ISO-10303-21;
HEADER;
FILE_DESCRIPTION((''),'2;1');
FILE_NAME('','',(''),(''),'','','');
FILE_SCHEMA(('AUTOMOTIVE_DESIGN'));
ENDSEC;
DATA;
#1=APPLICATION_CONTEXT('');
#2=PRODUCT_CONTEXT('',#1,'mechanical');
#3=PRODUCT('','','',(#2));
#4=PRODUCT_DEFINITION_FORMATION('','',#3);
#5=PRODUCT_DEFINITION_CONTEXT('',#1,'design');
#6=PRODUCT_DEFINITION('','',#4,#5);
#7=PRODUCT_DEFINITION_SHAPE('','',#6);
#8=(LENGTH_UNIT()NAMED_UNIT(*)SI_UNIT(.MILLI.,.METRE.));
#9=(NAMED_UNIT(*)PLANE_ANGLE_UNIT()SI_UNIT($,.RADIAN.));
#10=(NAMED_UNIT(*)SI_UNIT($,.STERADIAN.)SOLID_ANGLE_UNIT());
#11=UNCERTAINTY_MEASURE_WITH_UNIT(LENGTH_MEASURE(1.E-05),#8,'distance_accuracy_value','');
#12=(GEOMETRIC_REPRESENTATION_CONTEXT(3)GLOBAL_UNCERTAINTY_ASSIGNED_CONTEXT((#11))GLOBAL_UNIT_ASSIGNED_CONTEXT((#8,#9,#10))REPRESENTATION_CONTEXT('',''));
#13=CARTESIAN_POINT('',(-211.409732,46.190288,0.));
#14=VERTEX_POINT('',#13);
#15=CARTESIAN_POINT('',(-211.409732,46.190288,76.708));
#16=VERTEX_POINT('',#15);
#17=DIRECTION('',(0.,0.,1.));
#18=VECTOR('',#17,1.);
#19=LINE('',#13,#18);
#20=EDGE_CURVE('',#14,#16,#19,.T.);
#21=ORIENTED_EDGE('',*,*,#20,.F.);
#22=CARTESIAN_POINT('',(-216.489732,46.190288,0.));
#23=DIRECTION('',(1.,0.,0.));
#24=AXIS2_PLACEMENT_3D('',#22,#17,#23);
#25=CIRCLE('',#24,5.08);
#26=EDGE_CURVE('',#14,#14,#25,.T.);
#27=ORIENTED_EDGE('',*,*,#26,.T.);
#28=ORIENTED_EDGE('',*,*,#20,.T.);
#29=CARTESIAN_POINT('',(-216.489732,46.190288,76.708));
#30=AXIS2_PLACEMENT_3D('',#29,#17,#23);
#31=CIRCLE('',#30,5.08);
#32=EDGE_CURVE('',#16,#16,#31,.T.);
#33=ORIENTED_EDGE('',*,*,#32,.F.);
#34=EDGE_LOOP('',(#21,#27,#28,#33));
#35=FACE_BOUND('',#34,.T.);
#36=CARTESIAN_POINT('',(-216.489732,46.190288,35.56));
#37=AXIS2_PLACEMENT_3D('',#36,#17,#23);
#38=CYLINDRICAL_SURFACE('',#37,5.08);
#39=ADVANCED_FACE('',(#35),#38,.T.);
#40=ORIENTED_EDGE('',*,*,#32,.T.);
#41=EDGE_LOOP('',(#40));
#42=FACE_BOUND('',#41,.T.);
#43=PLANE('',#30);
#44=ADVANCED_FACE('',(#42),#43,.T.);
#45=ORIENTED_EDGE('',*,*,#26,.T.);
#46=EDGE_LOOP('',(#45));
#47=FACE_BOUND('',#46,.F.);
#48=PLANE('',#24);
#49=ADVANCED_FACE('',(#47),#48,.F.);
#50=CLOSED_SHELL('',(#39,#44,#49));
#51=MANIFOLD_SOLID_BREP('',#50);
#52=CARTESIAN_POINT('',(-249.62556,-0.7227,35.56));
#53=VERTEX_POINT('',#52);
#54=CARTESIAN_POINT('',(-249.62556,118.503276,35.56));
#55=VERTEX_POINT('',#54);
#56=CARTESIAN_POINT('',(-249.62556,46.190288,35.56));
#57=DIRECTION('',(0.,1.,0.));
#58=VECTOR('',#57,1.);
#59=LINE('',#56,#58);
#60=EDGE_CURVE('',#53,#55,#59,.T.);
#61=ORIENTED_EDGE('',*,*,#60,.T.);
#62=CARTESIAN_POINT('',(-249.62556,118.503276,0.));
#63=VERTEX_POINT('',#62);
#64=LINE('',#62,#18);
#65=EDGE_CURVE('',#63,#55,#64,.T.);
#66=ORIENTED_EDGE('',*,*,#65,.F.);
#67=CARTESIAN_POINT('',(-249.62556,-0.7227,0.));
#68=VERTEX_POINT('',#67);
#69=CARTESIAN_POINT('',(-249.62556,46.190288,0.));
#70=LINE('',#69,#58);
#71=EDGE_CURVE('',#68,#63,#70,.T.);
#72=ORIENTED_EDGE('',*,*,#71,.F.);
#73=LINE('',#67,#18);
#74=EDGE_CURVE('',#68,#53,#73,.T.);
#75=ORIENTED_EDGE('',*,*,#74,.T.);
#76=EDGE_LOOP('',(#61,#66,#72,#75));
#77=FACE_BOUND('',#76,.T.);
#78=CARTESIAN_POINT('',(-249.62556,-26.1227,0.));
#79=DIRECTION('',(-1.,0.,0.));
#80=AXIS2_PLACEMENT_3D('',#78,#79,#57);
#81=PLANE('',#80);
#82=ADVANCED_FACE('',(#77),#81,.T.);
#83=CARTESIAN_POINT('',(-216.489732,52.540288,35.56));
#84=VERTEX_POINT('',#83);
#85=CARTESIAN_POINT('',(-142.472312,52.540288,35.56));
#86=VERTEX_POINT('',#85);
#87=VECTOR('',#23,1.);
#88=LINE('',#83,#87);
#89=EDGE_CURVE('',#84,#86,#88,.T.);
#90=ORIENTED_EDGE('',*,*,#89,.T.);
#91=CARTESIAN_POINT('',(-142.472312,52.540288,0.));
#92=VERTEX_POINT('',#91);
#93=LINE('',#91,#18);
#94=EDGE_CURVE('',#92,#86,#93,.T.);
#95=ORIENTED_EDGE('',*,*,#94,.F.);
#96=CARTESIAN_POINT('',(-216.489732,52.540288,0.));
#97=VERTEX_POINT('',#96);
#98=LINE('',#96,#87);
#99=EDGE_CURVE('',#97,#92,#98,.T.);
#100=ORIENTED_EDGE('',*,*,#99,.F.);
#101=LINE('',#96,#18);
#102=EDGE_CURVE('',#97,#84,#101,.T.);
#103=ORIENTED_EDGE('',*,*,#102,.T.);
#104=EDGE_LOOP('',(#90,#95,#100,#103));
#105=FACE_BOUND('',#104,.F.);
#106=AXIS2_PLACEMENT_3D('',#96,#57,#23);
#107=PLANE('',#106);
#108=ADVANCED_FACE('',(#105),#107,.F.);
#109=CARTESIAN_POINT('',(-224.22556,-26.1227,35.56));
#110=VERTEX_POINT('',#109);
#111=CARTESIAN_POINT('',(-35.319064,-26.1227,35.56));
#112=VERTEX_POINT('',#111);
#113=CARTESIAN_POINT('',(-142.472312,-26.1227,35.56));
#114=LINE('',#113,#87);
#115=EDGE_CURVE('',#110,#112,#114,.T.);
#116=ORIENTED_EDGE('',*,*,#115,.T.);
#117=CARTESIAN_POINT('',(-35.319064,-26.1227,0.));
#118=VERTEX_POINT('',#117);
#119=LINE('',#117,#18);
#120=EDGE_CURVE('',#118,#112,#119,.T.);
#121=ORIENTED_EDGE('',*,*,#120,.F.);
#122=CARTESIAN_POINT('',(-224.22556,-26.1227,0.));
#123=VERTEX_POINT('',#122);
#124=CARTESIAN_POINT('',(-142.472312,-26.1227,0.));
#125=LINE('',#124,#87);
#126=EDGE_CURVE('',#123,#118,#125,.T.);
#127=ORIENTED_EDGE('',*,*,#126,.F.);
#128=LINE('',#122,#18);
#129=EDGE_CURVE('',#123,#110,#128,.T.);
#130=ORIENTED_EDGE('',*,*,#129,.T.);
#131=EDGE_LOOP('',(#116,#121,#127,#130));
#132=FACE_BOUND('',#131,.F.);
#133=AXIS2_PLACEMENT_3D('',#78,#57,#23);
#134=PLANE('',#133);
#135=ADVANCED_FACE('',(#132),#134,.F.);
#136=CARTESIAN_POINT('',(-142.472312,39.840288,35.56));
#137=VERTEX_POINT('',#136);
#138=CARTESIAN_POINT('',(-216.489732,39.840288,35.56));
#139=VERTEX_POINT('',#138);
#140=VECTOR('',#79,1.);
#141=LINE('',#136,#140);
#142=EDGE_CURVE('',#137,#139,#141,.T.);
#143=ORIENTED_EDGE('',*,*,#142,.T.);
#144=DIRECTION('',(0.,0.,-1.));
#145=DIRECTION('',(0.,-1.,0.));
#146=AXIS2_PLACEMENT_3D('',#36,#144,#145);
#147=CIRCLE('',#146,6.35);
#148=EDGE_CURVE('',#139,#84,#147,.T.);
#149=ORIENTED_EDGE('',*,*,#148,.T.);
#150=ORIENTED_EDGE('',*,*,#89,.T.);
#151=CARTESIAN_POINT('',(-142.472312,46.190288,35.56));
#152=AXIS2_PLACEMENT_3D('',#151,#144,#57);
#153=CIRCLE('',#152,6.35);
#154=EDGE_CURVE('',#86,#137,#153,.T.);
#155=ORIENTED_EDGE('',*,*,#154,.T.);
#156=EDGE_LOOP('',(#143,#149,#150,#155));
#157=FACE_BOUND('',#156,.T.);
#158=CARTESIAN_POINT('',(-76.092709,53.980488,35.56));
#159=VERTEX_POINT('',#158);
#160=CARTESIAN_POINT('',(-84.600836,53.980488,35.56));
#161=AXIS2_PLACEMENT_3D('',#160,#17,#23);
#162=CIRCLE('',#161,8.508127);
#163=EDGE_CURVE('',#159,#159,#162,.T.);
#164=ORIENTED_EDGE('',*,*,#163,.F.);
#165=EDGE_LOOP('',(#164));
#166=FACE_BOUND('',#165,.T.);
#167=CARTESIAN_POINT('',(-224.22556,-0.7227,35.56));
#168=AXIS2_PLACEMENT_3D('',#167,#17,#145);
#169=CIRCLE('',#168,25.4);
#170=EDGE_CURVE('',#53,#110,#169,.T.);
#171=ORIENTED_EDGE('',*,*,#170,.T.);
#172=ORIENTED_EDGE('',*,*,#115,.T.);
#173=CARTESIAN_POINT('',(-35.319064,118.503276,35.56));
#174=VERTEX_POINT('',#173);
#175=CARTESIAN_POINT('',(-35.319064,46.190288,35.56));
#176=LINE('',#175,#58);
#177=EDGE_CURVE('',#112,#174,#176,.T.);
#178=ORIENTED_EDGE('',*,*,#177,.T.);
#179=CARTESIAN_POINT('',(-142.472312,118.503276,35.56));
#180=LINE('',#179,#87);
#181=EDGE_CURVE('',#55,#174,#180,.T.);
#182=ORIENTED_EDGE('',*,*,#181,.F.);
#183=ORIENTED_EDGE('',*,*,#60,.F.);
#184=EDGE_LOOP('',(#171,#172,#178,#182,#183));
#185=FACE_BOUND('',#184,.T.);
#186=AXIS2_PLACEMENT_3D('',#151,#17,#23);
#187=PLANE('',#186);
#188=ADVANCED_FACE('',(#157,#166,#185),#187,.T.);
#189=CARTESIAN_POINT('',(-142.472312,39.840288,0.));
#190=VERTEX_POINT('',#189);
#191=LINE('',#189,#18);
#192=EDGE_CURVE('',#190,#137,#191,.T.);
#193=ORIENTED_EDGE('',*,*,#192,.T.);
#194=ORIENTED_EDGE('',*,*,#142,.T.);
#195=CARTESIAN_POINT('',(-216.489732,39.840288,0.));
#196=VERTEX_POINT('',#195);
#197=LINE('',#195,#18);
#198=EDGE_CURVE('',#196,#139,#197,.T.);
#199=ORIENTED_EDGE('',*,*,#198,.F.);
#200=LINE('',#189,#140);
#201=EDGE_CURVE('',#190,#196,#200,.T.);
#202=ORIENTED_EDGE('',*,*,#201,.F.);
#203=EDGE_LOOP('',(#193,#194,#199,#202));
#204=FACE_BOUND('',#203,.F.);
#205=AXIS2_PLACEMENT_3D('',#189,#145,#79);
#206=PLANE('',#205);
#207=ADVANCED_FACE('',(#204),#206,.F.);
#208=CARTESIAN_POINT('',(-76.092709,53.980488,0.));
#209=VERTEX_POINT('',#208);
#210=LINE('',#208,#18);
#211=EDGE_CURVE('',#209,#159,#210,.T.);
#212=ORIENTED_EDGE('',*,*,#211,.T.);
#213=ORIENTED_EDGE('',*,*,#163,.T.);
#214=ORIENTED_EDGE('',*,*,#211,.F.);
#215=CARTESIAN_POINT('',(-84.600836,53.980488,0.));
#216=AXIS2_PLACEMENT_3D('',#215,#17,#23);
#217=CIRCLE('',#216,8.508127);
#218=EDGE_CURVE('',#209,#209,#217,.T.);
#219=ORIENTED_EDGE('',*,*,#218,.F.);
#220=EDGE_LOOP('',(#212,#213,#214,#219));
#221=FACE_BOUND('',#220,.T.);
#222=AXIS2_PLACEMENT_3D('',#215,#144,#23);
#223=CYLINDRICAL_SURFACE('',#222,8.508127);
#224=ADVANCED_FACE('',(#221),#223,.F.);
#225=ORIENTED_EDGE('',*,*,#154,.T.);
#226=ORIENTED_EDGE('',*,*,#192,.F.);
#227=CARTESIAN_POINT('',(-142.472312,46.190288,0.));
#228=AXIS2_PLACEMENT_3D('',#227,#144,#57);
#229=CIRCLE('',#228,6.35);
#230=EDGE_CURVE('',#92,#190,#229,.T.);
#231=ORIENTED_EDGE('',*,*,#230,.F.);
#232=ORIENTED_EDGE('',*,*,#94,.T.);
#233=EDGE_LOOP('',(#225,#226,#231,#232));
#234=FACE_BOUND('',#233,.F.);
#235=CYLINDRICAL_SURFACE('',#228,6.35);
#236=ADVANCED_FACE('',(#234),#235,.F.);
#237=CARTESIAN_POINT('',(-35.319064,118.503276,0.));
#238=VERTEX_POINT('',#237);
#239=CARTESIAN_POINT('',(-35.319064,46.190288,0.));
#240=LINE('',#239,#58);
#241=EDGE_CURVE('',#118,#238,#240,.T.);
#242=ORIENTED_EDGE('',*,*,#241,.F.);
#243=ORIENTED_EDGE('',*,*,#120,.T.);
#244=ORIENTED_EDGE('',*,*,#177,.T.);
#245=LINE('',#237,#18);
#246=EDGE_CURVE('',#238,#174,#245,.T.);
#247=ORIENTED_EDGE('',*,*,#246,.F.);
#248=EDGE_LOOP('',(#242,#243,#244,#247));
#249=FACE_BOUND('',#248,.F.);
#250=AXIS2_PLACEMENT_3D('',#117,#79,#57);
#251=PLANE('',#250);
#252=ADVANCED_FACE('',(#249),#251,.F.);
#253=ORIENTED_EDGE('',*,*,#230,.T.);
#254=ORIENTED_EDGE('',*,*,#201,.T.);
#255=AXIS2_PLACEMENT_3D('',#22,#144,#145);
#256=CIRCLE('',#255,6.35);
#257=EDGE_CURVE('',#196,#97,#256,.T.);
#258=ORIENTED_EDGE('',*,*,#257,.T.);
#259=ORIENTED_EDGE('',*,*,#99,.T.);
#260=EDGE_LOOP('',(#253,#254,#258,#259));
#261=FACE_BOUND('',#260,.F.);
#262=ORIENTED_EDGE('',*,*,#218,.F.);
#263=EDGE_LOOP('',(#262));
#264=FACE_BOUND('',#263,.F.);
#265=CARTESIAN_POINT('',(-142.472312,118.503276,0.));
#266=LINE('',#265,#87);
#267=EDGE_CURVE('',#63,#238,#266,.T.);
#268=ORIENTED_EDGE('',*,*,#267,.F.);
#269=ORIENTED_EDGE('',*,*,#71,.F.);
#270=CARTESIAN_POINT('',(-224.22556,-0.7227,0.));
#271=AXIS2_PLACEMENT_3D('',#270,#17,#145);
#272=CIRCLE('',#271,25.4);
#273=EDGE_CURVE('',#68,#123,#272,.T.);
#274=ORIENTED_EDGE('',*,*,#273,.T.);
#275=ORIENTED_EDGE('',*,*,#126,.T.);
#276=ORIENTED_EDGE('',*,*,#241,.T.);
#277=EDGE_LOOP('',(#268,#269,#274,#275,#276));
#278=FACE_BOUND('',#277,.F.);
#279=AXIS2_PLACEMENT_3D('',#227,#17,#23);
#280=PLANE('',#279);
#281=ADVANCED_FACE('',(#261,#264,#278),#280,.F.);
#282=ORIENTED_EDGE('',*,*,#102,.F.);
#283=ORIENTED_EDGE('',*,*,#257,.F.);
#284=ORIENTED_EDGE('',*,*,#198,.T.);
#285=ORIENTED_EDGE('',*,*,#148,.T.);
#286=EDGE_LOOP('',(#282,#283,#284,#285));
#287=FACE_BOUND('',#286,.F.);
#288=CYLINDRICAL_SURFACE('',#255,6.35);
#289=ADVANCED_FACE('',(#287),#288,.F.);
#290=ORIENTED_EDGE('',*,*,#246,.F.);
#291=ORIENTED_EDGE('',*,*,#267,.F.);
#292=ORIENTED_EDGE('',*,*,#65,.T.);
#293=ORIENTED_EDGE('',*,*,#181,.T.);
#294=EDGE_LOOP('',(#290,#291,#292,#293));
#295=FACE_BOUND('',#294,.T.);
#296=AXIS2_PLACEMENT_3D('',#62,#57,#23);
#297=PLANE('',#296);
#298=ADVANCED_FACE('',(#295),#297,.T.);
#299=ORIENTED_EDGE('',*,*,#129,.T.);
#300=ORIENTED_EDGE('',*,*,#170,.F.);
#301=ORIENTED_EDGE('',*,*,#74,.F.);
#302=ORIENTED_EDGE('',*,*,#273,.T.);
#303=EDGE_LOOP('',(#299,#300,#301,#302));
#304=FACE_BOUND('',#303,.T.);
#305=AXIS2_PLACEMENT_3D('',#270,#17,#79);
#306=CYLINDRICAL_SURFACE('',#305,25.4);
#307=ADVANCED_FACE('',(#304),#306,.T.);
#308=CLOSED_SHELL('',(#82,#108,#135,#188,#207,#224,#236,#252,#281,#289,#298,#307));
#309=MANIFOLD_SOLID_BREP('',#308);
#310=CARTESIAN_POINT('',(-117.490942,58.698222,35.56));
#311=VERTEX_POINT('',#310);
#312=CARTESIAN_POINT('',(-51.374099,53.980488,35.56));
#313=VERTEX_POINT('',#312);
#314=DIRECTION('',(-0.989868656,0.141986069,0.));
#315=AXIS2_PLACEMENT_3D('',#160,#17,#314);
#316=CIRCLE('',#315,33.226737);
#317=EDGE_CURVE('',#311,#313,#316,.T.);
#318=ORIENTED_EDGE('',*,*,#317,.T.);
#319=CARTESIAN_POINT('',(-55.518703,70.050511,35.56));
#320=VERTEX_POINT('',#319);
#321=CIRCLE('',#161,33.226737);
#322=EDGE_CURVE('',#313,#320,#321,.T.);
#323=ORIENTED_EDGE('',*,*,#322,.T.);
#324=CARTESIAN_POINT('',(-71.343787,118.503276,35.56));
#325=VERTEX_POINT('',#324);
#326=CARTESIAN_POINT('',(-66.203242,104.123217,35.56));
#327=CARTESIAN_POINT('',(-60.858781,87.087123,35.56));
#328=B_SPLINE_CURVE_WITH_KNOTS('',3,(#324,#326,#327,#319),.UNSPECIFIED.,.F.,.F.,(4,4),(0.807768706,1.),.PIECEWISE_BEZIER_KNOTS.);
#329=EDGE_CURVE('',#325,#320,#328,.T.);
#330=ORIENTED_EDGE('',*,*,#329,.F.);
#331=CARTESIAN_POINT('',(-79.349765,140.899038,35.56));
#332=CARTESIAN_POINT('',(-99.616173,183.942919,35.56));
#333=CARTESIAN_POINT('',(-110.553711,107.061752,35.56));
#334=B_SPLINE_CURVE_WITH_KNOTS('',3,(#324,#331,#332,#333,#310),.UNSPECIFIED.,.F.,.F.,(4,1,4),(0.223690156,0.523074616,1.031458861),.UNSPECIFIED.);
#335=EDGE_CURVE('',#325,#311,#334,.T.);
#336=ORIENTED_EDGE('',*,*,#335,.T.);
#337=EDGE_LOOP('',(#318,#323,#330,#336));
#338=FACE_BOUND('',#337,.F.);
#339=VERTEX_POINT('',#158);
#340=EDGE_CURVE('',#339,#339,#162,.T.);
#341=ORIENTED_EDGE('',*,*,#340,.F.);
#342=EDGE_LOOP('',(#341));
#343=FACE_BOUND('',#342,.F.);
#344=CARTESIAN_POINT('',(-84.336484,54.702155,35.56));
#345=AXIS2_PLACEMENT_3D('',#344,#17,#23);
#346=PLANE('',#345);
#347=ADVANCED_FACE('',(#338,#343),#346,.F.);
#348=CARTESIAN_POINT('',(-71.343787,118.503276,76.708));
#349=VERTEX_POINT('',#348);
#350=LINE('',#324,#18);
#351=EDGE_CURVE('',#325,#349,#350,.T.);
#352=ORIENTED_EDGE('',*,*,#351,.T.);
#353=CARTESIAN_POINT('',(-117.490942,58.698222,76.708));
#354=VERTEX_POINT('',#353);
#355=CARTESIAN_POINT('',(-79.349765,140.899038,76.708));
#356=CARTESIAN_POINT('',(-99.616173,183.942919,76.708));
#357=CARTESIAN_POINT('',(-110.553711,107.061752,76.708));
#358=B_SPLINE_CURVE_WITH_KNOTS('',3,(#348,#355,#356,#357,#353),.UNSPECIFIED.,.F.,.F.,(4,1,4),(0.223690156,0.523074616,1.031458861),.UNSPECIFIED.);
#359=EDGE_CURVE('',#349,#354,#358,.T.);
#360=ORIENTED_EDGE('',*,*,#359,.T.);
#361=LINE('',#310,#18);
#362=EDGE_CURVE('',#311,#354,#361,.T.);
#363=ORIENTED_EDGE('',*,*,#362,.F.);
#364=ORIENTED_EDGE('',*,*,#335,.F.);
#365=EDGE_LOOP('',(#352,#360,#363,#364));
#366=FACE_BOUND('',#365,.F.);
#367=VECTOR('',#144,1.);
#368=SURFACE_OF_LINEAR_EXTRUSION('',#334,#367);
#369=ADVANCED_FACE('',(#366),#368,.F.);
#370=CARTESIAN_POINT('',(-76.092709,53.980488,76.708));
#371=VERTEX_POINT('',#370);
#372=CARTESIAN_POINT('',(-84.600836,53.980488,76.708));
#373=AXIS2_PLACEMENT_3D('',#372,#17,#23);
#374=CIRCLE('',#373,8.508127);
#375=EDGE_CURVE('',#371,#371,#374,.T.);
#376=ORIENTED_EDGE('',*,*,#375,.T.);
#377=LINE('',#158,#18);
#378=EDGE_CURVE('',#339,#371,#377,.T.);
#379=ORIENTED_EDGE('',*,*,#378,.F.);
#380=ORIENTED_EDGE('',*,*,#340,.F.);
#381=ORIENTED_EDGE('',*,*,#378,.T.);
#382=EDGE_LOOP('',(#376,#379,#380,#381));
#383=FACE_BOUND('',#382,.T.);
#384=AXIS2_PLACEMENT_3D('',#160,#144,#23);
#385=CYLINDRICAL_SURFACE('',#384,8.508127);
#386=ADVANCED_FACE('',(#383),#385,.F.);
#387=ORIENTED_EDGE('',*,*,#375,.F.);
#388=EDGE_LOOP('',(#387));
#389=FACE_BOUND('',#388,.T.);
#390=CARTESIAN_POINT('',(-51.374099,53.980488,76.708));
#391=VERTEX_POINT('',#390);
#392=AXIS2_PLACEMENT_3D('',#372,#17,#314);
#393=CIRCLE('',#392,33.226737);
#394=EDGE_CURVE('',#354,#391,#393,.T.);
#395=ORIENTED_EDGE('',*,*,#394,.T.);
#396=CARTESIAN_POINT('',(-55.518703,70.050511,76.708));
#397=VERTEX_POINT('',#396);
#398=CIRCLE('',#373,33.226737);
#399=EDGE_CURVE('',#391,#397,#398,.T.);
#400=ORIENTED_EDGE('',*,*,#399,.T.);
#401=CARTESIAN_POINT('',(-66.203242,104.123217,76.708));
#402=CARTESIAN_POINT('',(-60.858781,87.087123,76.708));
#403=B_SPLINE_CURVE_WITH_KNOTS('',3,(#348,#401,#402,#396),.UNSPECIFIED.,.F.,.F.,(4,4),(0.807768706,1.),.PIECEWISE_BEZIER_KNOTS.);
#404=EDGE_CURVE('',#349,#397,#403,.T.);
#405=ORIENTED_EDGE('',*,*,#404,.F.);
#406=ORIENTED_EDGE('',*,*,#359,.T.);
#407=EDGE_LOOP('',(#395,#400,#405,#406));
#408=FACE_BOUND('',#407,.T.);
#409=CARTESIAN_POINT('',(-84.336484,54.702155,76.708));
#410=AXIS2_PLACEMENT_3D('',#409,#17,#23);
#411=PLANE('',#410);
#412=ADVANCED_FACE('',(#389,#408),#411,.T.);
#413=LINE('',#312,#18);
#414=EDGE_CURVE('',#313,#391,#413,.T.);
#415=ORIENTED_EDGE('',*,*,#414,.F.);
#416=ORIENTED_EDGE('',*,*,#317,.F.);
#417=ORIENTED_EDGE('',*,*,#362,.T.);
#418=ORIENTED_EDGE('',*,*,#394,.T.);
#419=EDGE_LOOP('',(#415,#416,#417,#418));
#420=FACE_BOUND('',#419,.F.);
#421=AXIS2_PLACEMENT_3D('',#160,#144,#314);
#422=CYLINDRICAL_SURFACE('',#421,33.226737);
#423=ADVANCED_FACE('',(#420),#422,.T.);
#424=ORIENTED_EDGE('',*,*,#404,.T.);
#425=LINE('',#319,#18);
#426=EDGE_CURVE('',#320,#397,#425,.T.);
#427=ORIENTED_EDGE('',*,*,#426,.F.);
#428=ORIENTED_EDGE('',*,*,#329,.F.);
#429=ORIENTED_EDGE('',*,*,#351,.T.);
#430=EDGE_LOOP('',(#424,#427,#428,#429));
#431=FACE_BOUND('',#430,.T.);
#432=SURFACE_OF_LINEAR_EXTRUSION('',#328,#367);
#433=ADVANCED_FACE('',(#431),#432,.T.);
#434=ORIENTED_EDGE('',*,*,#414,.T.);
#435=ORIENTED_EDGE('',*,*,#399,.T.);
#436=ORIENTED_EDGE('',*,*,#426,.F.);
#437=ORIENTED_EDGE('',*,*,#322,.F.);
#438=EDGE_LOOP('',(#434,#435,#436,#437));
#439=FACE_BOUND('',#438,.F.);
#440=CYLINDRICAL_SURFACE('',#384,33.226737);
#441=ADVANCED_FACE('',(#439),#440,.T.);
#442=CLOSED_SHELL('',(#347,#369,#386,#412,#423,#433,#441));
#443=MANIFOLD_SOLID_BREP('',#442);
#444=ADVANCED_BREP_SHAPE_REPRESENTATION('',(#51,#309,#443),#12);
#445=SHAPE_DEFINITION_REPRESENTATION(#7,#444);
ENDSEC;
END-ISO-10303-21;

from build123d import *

# Parameters (mm, degrees)
F0_W          = 214.3064960837
F0_H          = 144.6259766817
F0_R          = 8.5081273079
F1_DEPTH      = 35.56
F3_R          = 5.08
F4_DEPTH      = 41.148
F4_DEPTH_BACK = 35.56
F2_R          = 8.5081273079
F5_DEPTH      = 41.148
F6_R          = 25.4


with BuildPart() as f1:
    # F0 (on Top) → F1 (new body)
    with BuildSketch(Plane.XY):
        with Locations((-142.4723118544, 46.1902879179)):
            Rectangle(F0_W, F0_H)
        with BuildLine():
            Line((-142.4723118544, 39.8402879179), (-216.4897322655, 39.8402879179))
            ThreePointArc((-216.4897322655, 39.8402879179), (-222.8397322655, 46.1902879179), (-216.4897322655, 52.5402879179))
            Line((-216.4897322655, 52.5402879179), (-142.4723118544, 52.5402879179))
            ThreePointArc((-142.4723118544, 52.5402879179), (-136.1223118544, 46.1902879179), (-142.4723118544, 39.8402879179))
        make_face(mode=Mode.SUBTRACT)
        with Locations((-84.6008360386, 53.9804883301)):
            Circle(F0_R, mode=Mode.SUBTRACT)
    extrude(amount=F1_DEPTH)

    # F6
    f6_edges = [f1.edges().sort_by_distance(p)[0] for p in [
        (-249.62556, -26.1227, 17.78),
    ]]
    fillet(f6_edges, radius=F6_R)


with BuildPart() as f4:
    # F3 (on face) → F4 (new body, two sides)
    with BuildSketch(Plane.XY.offset(35.56)) as f4_sk:
        with Locations((-216.4897322655, 46.1902879179)):
            Circle(F3_R)
    extrude(amount=F4_DEPTH)
    extrude(f4_sk.sketch, amount=-F4_DEPTH_BACK)


with BuildPart() as f5:
    # F2 (on face) → F5 (new body, through all)
    with BuildSketch(Plane.XY.offset(35.56)):
        with BuildLine():
            ThreePointArc((-117.4909419259, 58.6982221516), (-86.9657003677, 20.8380156645), (-51.374098647, 53.9804883301))
            ThreePointArc((-51.374098647, 53.9804883301), (-52.4269300084, 62.2784307525), (-55.5187034955, 70.0505114923))
            ThreePointArc((-55.5187034955, 70.0505114923), (-90.5878038493, 86.6633935578), (-117.4909419259, 58.6982221516))
        make_face()
        with Locations((-84.6008360386, 53.9804883301)):
            Circle(F2_R, mode=Mode.SUBTRACT)
        with BuildLine():
            ThreePointArc((-117.4909419259, 58.6982221516), (-90.5878038493, 86.6633935578), (-55.5187034955, 70.0505114923))
            add(Edge.make_bspline(
                [(-71.3437874184, 118.5032762587), (-66.2032422505, 104.1232170214), (-60.8587807347, 87.0871227133), (-55.5187034955, 70.0505114923)],
                knots=[0.8077687056, 0.8077687056, 0.8077687056, 0.8077687056, 1, 1, 1, 1], degree=3))
            Line((-71.3437874184, 118.5032762587), (-108.0454849884, 118.5032762587))
            add(Edge.make_bspline(
                [(-117.4909419259, 58.6982221516), (-114.4385454829, 79.97827864), (-111.3965044358, 101.2627998667), (-108.0454849884, 118.5032762587)],
                knots=[0, 0, 0, 0, 0.2236901556, 0.2236901556, 0.2236901556, 0.2236901556], degree=3))
        make_face()
        with BuildLine():
            Line((-108.0454849884, 118.5032762587), (-71.3437874184, 118.5032762587))
            add(Edge.make_bspline(
                [(-108.0454849884, 118.5032762587), (-103.7805881801, 140.4455102242), (-94.0039277475, 172.0230555596), (-79.3497645207, 140.8990380359), (-71.3437874184, 118.5032762587)],
                knots=[0.2236901556, 0.2236901556, 0.2236901556, 0.2236901556, 0.5083842451, 0.8077687056, 0.8077687056, 0.8077687056, 0.8077687056], degree=3))
        make_face()
    extrude(amount=F5_DEPTH)


solid = Compound([f1.part, f4.part, f5.part])
